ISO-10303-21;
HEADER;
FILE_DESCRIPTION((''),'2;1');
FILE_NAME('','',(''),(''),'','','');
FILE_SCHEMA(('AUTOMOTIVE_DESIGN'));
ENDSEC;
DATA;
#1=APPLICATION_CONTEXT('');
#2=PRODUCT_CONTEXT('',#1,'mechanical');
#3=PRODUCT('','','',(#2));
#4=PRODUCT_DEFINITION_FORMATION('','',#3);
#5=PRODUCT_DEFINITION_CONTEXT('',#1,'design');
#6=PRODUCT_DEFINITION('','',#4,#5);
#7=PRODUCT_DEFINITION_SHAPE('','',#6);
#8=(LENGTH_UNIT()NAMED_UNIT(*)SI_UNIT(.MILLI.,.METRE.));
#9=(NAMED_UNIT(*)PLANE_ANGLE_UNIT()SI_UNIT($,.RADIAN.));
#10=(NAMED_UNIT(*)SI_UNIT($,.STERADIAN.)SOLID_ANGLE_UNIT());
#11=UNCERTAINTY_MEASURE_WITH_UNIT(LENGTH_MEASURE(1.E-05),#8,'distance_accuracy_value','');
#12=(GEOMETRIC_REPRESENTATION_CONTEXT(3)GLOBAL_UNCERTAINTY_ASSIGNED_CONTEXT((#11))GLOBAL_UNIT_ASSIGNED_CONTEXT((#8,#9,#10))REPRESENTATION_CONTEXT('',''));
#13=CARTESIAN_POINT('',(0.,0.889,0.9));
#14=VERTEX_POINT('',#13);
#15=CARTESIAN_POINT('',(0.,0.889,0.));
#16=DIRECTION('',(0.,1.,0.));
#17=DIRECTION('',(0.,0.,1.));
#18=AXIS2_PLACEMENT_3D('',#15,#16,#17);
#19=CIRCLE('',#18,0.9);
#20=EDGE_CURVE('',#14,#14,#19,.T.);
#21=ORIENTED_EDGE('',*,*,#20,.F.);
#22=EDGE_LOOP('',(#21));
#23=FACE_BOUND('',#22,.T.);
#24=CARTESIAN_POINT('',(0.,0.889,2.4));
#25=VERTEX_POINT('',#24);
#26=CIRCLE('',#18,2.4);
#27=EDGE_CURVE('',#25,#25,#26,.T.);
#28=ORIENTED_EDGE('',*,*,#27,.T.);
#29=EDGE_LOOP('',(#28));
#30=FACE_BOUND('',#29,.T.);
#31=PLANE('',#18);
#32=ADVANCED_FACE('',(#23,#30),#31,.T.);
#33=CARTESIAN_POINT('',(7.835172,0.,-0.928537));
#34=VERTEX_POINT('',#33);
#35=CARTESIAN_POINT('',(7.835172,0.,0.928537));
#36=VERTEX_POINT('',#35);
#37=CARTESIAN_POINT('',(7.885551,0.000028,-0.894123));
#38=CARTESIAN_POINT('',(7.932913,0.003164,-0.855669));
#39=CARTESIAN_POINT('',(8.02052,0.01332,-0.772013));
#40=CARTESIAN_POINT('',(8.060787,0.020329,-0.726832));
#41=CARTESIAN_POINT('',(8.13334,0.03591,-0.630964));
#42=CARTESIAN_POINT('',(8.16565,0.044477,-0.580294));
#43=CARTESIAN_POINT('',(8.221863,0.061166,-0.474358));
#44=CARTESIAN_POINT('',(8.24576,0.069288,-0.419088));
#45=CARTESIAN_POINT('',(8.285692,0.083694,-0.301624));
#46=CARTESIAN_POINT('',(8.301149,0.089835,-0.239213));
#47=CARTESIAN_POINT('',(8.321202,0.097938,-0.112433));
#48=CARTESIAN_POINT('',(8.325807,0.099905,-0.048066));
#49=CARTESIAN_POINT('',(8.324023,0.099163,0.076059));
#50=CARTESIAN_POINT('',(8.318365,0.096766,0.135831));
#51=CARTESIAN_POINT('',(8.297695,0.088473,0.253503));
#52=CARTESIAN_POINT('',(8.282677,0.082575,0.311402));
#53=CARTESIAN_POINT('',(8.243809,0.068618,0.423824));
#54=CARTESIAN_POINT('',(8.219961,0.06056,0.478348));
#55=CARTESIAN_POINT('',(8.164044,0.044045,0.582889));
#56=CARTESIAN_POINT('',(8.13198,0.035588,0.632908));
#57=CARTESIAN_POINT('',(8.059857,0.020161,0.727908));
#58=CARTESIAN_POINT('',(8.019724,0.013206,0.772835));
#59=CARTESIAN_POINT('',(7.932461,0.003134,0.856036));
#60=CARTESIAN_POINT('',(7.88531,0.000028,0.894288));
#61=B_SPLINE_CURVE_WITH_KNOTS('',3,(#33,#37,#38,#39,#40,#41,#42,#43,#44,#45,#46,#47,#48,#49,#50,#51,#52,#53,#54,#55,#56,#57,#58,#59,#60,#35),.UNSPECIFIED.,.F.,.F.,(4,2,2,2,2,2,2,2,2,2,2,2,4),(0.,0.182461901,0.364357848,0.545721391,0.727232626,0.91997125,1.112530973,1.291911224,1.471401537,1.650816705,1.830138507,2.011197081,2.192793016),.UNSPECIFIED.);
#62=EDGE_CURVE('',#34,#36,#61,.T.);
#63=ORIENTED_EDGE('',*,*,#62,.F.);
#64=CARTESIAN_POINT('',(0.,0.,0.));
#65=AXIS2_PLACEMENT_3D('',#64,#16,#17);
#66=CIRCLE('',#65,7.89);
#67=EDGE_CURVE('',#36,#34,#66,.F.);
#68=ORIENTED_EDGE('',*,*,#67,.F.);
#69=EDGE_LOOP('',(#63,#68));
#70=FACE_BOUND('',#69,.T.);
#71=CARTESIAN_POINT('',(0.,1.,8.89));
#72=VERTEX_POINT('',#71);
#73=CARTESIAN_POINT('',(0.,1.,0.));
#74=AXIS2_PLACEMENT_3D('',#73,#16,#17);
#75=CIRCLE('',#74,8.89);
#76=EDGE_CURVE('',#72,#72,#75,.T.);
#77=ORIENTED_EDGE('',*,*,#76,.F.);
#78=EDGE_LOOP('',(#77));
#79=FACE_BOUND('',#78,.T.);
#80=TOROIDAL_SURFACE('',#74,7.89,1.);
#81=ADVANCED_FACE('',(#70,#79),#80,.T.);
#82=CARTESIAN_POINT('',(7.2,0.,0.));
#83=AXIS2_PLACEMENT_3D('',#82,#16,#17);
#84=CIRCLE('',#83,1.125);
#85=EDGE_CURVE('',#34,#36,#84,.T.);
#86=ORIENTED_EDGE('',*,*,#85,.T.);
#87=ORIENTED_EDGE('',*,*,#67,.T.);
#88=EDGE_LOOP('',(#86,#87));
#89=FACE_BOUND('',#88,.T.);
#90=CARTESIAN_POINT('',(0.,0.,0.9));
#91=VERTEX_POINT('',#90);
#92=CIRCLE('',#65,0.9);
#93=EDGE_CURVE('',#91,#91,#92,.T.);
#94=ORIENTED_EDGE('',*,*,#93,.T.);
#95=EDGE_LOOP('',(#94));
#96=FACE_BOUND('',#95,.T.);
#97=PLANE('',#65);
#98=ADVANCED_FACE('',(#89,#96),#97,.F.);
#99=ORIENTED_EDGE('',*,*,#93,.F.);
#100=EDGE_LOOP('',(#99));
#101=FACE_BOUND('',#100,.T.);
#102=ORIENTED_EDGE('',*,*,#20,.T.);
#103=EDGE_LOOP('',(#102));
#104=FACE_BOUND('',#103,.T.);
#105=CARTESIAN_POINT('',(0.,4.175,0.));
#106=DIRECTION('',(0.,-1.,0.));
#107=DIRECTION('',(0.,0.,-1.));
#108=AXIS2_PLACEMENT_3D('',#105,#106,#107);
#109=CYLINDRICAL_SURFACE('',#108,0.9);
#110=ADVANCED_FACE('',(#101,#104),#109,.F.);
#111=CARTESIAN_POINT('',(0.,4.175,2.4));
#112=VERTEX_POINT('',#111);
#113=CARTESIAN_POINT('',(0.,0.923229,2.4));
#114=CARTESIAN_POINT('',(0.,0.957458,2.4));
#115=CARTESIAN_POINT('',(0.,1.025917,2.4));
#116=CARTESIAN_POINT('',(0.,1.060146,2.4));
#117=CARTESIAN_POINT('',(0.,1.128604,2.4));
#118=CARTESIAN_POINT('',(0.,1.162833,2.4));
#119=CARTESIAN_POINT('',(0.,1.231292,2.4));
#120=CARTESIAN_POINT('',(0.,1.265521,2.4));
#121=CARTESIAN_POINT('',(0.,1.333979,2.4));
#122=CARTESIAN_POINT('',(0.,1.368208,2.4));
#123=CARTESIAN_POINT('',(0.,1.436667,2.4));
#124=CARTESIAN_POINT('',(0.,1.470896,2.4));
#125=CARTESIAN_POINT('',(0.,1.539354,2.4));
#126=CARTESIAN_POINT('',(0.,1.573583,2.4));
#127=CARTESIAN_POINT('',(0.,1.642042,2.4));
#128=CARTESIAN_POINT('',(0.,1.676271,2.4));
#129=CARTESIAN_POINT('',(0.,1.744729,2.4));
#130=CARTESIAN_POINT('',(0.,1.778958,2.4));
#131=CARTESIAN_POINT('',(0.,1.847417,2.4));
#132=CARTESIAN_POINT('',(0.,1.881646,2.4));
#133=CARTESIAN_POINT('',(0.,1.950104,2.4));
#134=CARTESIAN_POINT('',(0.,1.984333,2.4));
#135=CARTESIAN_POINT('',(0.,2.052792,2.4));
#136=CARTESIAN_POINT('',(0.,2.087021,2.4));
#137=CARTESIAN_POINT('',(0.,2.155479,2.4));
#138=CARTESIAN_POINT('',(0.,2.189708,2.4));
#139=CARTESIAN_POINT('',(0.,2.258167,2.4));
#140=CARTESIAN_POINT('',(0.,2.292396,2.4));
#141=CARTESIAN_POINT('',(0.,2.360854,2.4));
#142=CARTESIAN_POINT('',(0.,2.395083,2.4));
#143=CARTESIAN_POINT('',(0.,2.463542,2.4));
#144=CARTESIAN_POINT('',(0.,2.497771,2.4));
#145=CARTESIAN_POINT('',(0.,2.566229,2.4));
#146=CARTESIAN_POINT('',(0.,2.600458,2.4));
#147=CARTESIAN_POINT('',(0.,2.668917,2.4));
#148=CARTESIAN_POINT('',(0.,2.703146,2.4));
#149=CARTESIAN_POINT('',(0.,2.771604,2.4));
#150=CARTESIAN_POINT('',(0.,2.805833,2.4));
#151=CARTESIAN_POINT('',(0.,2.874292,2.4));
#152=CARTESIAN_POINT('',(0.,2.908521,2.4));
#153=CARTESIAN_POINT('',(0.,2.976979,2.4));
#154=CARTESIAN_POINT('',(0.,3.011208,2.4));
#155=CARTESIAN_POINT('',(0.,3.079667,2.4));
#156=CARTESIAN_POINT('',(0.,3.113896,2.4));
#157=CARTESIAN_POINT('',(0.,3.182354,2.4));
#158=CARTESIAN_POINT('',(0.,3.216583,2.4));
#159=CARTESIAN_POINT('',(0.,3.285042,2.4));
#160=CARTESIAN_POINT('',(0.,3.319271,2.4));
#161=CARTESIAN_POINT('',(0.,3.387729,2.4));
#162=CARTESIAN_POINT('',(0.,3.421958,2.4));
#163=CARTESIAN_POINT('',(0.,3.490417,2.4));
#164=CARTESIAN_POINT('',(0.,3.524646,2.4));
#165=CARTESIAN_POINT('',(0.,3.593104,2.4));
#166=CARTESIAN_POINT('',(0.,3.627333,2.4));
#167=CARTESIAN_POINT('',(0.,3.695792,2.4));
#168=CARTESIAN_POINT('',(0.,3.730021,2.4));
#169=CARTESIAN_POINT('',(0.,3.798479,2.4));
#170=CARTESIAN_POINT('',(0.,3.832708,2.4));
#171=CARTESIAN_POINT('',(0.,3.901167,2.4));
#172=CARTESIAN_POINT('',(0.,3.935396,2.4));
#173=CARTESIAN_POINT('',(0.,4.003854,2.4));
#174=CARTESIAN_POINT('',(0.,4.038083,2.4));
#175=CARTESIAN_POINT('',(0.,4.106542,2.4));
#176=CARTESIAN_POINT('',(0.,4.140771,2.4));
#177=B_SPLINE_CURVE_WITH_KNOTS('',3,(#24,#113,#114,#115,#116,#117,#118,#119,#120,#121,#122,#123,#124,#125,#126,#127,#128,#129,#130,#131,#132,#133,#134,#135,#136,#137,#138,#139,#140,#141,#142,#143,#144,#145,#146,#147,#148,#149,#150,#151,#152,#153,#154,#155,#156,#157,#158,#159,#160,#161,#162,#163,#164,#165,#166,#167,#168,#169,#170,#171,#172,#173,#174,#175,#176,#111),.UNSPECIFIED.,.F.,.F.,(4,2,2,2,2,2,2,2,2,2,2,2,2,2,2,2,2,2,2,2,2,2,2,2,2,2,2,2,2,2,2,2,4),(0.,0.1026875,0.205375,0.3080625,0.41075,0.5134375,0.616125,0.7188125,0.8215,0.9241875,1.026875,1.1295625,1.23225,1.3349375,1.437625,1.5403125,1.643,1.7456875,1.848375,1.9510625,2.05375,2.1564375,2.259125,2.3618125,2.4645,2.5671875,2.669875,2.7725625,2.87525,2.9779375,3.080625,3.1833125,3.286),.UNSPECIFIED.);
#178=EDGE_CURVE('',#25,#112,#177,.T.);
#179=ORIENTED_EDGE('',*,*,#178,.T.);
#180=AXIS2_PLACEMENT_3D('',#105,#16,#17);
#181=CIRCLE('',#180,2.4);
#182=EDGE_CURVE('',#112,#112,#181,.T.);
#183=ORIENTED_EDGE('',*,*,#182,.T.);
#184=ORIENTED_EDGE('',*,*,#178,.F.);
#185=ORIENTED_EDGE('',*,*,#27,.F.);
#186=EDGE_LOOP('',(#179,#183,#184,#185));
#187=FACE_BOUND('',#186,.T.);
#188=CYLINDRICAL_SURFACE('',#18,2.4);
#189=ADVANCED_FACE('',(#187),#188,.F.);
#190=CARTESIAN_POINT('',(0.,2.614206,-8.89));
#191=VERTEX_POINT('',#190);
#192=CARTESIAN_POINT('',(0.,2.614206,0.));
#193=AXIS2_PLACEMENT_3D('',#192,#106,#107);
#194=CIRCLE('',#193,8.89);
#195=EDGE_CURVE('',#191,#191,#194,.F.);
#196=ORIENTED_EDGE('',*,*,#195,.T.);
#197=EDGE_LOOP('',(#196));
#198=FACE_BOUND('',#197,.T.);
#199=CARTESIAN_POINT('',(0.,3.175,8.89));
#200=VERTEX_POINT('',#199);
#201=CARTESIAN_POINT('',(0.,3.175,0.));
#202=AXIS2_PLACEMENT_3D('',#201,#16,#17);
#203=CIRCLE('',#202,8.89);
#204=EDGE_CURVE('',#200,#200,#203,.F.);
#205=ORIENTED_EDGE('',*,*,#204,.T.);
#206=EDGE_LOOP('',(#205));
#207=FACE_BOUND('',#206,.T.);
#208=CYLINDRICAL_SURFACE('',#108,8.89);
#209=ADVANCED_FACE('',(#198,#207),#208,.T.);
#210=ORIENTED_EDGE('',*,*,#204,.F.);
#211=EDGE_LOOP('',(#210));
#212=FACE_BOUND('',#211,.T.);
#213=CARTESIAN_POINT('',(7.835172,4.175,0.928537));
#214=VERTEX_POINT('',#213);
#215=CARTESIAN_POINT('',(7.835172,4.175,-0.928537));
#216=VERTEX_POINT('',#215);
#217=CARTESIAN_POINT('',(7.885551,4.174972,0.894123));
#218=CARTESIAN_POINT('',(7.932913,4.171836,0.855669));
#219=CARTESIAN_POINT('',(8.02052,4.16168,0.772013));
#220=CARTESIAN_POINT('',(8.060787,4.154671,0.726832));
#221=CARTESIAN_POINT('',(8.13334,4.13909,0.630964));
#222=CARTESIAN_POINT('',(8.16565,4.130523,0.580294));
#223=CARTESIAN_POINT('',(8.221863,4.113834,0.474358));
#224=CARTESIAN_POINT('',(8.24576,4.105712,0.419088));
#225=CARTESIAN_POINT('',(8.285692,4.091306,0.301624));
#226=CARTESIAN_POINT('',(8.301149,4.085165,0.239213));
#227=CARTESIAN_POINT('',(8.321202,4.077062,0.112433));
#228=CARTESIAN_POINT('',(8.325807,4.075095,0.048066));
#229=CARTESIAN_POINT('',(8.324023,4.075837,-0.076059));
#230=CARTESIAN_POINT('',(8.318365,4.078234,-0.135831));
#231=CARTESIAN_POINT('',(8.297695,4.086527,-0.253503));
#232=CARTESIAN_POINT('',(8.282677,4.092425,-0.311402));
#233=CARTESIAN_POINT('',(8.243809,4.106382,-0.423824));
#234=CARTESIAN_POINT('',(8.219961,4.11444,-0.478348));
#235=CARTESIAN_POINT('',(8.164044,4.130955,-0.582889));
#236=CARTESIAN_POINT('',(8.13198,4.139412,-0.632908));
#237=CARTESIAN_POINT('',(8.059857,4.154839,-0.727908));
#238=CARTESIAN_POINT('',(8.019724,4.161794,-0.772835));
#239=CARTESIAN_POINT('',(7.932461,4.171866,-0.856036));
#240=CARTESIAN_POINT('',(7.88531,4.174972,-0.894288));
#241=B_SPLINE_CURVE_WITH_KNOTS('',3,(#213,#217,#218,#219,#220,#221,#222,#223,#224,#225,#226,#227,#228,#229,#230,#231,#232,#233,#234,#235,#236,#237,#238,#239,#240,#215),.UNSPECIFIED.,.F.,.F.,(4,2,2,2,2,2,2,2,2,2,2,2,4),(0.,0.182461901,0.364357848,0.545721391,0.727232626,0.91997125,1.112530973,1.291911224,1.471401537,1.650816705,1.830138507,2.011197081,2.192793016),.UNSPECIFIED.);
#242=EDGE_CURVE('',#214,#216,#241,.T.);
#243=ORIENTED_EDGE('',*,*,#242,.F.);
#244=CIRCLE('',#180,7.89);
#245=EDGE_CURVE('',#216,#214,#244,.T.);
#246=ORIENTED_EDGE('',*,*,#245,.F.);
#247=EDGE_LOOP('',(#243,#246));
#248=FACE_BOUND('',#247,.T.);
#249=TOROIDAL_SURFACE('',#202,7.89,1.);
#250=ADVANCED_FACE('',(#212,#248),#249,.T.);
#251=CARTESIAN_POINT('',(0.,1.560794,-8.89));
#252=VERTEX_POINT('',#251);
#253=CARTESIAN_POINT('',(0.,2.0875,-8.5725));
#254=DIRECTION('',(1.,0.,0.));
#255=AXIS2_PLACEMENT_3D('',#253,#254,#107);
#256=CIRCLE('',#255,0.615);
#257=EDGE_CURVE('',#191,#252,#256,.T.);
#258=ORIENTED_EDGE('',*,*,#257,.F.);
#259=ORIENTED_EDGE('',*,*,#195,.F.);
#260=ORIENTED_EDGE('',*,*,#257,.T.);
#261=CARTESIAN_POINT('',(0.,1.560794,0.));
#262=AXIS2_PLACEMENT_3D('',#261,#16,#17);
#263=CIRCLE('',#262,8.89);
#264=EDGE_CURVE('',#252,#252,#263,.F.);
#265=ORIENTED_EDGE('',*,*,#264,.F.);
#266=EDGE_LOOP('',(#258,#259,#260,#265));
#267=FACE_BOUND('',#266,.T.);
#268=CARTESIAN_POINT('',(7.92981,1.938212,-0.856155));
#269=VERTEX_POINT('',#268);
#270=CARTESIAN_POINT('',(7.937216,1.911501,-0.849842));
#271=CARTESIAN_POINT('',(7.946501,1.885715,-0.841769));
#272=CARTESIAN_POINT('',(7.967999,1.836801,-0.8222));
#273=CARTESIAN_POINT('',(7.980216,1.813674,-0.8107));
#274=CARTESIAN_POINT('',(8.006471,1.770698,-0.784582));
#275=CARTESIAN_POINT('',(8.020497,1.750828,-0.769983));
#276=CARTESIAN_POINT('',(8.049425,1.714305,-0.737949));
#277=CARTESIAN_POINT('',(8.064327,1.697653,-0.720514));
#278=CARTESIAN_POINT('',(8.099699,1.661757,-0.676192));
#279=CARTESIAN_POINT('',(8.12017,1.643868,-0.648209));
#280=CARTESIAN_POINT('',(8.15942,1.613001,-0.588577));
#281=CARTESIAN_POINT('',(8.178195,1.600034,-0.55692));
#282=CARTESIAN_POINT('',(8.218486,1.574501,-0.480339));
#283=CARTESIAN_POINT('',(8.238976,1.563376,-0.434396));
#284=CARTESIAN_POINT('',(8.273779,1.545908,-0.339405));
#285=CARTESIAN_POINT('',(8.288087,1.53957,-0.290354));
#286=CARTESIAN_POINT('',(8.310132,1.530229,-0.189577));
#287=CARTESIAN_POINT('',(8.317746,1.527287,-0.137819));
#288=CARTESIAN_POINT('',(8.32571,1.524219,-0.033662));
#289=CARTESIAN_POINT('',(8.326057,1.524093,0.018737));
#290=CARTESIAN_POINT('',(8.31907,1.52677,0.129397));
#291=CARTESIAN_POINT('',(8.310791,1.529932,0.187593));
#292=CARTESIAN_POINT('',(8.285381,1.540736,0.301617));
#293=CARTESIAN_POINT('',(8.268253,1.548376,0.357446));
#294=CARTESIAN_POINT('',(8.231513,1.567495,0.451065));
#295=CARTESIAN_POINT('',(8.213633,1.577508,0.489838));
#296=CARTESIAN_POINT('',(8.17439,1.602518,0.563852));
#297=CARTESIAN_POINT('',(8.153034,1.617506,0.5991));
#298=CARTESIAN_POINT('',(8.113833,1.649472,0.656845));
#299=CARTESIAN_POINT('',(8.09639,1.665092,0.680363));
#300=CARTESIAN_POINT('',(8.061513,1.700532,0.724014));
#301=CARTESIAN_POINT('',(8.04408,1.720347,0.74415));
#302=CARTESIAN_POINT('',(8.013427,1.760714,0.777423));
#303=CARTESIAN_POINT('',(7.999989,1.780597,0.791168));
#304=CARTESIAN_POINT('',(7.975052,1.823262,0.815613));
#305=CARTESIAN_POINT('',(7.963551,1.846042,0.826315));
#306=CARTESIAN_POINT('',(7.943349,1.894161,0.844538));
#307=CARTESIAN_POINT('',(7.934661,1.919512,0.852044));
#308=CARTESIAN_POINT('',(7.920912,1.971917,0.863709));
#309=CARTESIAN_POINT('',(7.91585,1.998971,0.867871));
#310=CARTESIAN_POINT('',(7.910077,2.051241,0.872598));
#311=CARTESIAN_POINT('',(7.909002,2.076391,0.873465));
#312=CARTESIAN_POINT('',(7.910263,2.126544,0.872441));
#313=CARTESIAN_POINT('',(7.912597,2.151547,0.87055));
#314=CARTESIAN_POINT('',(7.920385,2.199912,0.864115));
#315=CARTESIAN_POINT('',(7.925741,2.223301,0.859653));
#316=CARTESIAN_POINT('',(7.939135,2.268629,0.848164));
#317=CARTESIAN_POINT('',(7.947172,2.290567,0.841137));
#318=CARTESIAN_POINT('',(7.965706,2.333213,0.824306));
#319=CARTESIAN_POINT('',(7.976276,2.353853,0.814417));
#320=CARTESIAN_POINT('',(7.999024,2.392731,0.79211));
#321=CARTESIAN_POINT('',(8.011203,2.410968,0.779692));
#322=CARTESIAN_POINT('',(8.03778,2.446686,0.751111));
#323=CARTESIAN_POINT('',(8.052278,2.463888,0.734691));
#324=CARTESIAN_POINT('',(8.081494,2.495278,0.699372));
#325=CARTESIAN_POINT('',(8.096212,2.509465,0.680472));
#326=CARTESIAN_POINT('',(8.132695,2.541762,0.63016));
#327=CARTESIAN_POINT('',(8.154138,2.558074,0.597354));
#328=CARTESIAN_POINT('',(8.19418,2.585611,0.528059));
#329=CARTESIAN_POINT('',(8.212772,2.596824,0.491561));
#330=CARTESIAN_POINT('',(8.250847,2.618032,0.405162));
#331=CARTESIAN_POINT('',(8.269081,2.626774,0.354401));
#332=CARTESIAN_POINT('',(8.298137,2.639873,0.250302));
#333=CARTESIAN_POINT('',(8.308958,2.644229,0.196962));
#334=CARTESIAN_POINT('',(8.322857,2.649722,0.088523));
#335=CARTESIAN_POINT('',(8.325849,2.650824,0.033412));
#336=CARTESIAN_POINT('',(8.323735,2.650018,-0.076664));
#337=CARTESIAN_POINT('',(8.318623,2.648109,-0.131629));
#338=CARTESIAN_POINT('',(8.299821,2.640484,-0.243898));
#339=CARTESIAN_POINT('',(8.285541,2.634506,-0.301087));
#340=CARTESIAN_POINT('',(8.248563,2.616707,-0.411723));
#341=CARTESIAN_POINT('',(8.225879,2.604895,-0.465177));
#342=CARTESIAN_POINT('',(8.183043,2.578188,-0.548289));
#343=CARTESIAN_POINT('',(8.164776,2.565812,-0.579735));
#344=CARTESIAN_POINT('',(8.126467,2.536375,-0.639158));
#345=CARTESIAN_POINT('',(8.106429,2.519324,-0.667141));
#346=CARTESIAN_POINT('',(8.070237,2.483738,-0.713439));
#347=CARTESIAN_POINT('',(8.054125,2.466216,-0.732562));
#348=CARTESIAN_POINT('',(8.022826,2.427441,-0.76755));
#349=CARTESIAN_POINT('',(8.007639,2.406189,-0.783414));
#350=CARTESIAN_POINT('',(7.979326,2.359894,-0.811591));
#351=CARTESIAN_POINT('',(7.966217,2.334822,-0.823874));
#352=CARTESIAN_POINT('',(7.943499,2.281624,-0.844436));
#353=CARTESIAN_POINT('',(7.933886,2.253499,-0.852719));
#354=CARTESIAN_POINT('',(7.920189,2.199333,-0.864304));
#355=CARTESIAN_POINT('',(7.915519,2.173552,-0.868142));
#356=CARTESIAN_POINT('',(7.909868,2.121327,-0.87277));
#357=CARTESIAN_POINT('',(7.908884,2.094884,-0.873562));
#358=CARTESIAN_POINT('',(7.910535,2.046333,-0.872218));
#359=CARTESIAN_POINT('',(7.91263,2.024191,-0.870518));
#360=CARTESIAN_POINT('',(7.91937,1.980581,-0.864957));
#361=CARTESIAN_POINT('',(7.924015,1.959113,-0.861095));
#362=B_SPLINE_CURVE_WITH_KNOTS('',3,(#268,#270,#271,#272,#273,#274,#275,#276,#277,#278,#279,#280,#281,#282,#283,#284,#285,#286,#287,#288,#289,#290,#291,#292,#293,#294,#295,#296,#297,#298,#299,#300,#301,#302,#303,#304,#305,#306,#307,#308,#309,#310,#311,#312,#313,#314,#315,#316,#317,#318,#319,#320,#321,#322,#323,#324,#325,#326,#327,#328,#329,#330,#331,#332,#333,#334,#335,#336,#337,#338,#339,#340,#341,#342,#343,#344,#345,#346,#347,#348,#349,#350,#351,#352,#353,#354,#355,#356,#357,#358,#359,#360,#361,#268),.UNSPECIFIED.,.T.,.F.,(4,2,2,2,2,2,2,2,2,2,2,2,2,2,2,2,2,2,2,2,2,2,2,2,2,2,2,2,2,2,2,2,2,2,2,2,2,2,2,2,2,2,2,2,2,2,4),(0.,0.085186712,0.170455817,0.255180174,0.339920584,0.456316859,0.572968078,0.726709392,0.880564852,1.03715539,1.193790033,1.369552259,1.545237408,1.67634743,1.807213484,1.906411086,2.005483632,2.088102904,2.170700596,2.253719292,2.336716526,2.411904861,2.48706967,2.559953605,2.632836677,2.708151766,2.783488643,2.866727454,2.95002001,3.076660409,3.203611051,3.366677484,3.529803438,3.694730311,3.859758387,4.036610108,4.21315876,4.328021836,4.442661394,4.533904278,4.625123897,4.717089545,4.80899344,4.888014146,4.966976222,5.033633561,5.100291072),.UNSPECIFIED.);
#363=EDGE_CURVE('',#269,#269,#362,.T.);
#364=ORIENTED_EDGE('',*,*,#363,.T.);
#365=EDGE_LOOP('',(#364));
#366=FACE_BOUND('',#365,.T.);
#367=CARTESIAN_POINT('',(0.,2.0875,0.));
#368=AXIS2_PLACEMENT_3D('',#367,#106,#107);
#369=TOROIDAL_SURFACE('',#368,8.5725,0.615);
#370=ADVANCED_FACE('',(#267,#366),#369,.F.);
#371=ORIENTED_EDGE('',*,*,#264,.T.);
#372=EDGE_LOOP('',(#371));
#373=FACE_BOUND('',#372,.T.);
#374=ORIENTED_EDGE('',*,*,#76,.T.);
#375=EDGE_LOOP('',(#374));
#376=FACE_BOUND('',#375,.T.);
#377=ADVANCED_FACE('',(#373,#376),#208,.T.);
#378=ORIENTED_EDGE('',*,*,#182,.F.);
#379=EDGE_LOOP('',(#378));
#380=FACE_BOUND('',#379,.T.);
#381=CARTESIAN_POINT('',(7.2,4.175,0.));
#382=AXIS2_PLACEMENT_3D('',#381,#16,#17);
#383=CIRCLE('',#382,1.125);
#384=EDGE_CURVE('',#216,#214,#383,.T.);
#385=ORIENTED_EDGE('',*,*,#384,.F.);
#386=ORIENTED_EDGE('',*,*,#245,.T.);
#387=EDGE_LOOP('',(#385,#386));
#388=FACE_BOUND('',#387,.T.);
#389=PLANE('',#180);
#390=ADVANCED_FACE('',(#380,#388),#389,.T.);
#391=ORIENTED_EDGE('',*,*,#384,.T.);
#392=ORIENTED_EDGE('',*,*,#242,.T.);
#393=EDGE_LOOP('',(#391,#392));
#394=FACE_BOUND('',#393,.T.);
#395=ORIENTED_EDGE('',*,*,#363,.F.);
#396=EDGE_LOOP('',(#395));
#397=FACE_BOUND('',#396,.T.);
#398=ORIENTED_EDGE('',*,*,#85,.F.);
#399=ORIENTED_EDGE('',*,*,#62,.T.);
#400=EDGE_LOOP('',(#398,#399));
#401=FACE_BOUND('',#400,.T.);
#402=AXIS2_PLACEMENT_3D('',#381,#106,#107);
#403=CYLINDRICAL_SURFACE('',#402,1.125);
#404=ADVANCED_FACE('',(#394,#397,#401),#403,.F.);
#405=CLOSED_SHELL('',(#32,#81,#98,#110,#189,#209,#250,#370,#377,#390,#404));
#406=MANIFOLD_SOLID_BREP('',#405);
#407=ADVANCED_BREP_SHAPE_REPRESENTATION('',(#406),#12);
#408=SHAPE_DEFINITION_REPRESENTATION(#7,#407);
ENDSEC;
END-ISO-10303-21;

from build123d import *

# Parameters (mm, degrees)
SKETCH1_R            = 8.89
SKETCH1_R_2          = 0.9
SKETCH1_R_3          = 1.125
BOSS_EXTRUDE1_DEPTH  = 4.175
SKETCH2_R            = 2.4
CUT_EXTRUDE1_DEPTH   = 3.286
CUT_SWEEP1_PROFILE_R = 0.615
FILLET1_R            = 1


with BuildPart() as part:
    # Sketch1 → Boss-Extrude1 (new body)
    with BuildSketch(Plane(origin=(0, 0, 0), x_dir=(1, 0, 0), z_dir=(0, 1, 0))):
        with Locations(Location((0, 0, 0), (0, 0, 270))):
            Circle(SKETCH1_R)
        with Locations(Location((0, 0, 0), (0, 0, 270))):
            Circle(SKETCH1_R_2, mode=Mode.SUBTRACT)
        with Locations(Location((7.2, 0, 0), (0, 0, 270))):
            Circle(SKETCH1_R_3, mode=Mode.SUBTRACT)
    extrude(amount=BOSS_EXTRUDE1_DEPTH)

    # Sketch2 → Cut-Extrude1 (cut)
    with BuildSketch(Plane(origin=(0, 4.175, 0), x_dir=(1, 0, 0), z_dir=(0, 1, 0))):
        with Locations(Location((0, 0, 0), (0, 0, 270))):
            Circle(SKETCH2_R)
    extrude(amount=-CUT_EXTRUDE1_DEPTH, mode=Mode.SUBTRACT)

    # Cut-Sweep1: sweep along a path in Sketch3
    with BuildLine(Plane(origin=(0, 2.0875, 0), x_dir=(-1, 0, 0), z_dir=(0, -1, 0))) as cut_sweep1_path:
        CenterArc((0, 0), 8.5725, 0, 360)
    # Cut-Sweep1 profile (on start of the path) → Cut-Sweep1 (sweep, cut)
    with BuildSketch(Plane(origin=(-8.5725, 2.0875, 0), x_dir=(-1, 0, 0), z_dir=(0, 0, -1))):
        Circle(CUT_SWEEP1_PROFILE_R)
    sweep(path=cut_sweep1_path.line, mode=Mode.SUBTRACT)

    # Fillet1
    # the kernel refuses this fillet: 1 mm, written as the material it takes off along each edge
    with BuildSketch(Plane(origin=(0, 0, 0), x_dir=(0, 0, 1), z_dir=(-1, 0, 0))) as fillet1_piece_1:
        with BuildLine():
            CenterArc((8.89 - FILLET1_R, FILLET1_R), FILLET1_R, 270, 90)
            Line((8.89 - FILLET1_R, 0), (8.89, 0))
            Line((8.89, 0), (8.89, FILLET1_R))
        make_face()
    revolve(axis=Axis((0, 0, 0), (0, 1, 0)), mode=Mode.SUBTRACT)
    with BuildSketch(Plane(origin=(0, 4.175, 0), x_dir=(0, 0, 1), z_dir=(-1, 0, 0))) as fillet1_piece_2:
        with BuildLine():
            CenterArc((8.89 - FILLET1_R, -FILLET1_R), FILLET1_R, 0, 90)
            Line((8.89 - FILLET1_R, 0), (8.89, 0))
            Line((8.89, 0), (8.89, -FILLET1_R))
        make_face()
    revolve(axis=Axis((0, 4.175, 0), (0, 1, 0)), mode=Mode.SUBTRACT)


solid = part.part
